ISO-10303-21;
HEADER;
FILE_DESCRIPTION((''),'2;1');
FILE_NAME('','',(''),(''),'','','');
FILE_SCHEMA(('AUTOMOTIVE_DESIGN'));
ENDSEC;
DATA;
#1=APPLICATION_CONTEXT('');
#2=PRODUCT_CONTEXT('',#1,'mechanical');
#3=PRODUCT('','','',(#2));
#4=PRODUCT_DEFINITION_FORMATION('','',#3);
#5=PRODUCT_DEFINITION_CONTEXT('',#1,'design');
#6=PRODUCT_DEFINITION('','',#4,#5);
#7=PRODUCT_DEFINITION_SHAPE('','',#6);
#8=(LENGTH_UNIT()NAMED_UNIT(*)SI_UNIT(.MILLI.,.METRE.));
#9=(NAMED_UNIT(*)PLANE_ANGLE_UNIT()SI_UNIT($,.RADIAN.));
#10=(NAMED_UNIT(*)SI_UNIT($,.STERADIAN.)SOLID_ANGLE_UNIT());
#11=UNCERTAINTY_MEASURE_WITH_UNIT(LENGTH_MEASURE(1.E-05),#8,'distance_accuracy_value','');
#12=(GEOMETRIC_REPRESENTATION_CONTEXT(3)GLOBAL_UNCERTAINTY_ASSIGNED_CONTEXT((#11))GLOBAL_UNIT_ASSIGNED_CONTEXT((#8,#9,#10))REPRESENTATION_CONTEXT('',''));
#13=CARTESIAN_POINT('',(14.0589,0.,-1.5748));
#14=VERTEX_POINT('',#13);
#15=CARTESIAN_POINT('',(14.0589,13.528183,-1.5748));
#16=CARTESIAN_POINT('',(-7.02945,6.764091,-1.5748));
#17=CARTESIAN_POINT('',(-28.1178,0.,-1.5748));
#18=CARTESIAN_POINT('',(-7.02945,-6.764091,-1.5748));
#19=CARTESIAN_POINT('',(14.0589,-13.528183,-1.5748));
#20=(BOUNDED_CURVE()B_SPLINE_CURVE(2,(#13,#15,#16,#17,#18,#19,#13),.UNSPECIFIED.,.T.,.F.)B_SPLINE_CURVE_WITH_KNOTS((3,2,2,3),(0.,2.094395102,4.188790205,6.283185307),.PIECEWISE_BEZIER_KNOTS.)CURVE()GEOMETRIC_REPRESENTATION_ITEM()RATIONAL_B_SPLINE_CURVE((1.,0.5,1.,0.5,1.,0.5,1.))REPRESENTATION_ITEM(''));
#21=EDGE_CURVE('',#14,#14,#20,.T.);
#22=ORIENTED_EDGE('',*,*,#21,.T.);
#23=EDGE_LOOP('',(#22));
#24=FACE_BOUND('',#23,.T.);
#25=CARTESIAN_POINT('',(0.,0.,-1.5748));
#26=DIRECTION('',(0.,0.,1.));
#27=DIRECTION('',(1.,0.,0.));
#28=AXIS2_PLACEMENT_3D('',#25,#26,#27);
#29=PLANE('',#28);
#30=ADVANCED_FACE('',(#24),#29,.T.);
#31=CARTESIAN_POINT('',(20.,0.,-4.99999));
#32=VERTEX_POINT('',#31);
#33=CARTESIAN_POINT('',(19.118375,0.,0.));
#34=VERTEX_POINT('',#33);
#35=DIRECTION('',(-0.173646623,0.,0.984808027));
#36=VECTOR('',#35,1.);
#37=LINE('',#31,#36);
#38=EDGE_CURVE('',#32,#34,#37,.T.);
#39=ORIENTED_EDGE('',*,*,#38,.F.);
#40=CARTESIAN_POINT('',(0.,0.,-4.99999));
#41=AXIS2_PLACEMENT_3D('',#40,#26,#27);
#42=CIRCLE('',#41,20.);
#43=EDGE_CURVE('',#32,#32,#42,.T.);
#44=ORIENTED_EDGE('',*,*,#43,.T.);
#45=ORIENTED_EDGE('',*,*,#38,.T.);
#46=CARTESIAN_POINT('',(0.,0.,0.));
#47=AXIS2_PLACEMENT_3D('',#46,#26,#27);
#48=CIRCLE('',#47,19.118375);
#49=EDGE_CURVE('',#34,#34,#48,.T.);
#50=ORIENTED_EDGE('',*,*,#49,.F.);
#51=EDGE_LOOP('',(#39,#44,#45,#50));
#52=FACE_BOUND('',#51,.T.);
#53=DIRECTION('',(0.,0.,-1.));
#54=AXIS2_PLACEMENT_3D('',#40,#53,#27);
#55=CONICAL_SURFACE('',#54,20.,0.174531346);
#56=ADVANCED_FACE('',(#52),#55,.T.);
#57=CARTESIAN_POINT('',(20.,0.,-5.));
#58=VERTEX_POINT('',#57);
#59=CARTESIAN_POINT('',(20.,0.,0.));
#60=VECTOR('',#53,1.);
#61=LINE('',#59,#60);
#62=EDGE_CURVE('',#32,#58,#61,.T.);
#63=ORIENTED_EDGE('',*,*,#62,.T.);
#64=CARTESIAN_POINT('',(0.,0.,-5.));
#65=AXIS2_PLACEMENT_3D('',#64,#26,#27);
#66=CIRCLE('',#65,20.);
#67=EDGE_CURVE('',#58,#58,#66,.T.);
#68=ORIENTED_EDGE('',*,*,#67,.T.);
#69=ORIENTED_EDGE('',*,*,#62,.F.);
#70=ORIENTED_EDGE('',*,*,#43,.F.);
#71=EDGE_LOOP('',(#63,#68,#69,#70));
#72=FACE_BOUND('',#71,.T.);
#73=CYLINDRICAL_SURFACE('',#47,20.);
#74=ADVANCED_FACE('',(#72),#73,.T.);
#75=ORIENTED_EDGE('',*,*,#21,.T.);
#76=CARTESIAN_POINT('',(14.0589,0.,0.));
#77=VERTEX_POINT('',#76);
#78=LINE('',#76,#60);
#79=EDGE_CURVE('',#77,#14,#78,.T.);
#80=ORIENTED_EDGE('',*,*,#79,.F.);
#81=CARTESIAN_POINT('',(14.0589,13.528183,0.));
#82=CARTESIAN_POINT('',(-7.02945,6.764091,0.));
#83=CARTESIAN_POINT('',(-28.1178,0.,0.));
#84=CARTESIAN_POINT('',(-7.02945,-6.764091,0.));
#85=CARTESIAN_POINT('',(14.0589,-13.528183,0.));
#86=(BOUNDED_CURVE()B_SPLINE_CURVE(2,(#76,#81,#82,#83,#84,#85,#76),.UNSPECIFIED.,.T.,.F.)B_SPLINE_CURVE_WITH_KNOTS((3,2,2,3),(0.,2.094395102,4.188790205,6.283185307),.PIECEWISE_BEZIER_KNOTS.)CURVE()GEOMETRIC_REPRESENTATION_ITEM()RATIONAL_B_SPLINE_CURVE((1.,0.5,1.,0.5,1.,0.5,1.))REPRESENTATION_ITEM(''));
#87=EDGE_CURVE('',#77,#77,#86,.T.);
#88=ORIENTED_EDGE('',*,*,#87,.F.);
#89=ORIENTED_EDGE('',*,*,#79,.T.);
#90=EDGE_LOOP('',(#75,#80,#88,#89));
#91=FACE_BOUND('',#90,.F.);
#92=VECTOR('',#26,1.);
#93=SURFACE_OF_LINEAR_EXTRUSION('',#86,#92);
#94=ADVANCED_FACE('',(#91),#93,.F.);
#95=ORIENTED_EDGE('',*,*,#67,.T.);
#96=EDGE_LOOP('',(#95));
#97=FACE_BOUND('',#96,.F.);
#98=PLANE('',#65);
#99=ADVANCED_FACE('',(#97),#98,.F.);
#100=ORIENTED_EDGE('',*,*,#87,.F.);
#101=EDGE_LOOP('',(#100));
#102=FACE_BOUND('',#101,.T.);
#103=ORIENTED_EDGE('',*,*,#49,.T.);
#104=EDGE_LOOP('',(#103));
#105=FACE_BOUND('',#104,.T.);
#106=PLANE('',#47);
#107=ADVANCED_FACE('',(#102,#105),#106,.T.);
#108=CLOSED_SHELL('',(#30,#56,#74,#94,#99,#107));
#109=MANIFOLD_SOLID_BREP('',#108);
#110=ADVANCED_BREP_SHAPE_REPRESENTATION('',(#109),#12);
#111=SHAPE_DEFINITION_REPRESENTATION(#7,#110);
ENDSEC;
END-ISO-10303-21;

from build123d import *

# Parameters (mm, degrees)
F0_R     = 20
F1_DEPTH = 5
F2_SIZE2 = 0.881625
F2_SIZE  = 4.99999
F4_DEPTH = 1.5748


# Not quite as in the source:
# - a fillet or chamfer is up to 0.001 mm smaller than in the source, because OpenCascade refuses the exact size


with BuildPart() as f1:
    # F0 (on Top) → F1 (new body)
    with BuildSketch(Plane.XY):
        Circle(F0_R)
    extrude(amount=-F1_DEPTH)

    # F2 (size 5 and 0.8816349035 in the source; OpenCascade refuses exactly that, so slightly less here)
    f2_edges = [f1.edges().sort_by_distance(p)[0] for p in [
        (-20, 0, 0),
    ]]
    f2_side = f1.faces().sort_by_distance((-20, 0, -2.5))[0]
    chamfer(f2_edges, length=F2_SIZE, length2=F2_SIZE2, reference=f2_side)

    # F3 (on face) → F4 (cut)
    with BuildSketch(Plane.XY):
        with BuildLine():
            add(Edge.make_bspline(
                [(14.0589, 0), (14.0589, 13.5281828325), (-7.02945, 6.7640914163), (-28.1178, 0), (-7.02945, -6.7640914163), (14.0589, -13.5281828325), (14.0589, 0)],
                knots=[0, 0, 0, 2.0943951024, 2.0943951024, 4.1887902048, 4.1887902048, 6.2831853072, 6.2831853072, 6.2831853072], degree=2, weights=[1, 0.5, 1, 0.5, 1, 0.5, 1]))
        make_face()
    extrude(amount=-F4_DEPTH, mode=Mode.SUBTRACT)


solid = f1.part
